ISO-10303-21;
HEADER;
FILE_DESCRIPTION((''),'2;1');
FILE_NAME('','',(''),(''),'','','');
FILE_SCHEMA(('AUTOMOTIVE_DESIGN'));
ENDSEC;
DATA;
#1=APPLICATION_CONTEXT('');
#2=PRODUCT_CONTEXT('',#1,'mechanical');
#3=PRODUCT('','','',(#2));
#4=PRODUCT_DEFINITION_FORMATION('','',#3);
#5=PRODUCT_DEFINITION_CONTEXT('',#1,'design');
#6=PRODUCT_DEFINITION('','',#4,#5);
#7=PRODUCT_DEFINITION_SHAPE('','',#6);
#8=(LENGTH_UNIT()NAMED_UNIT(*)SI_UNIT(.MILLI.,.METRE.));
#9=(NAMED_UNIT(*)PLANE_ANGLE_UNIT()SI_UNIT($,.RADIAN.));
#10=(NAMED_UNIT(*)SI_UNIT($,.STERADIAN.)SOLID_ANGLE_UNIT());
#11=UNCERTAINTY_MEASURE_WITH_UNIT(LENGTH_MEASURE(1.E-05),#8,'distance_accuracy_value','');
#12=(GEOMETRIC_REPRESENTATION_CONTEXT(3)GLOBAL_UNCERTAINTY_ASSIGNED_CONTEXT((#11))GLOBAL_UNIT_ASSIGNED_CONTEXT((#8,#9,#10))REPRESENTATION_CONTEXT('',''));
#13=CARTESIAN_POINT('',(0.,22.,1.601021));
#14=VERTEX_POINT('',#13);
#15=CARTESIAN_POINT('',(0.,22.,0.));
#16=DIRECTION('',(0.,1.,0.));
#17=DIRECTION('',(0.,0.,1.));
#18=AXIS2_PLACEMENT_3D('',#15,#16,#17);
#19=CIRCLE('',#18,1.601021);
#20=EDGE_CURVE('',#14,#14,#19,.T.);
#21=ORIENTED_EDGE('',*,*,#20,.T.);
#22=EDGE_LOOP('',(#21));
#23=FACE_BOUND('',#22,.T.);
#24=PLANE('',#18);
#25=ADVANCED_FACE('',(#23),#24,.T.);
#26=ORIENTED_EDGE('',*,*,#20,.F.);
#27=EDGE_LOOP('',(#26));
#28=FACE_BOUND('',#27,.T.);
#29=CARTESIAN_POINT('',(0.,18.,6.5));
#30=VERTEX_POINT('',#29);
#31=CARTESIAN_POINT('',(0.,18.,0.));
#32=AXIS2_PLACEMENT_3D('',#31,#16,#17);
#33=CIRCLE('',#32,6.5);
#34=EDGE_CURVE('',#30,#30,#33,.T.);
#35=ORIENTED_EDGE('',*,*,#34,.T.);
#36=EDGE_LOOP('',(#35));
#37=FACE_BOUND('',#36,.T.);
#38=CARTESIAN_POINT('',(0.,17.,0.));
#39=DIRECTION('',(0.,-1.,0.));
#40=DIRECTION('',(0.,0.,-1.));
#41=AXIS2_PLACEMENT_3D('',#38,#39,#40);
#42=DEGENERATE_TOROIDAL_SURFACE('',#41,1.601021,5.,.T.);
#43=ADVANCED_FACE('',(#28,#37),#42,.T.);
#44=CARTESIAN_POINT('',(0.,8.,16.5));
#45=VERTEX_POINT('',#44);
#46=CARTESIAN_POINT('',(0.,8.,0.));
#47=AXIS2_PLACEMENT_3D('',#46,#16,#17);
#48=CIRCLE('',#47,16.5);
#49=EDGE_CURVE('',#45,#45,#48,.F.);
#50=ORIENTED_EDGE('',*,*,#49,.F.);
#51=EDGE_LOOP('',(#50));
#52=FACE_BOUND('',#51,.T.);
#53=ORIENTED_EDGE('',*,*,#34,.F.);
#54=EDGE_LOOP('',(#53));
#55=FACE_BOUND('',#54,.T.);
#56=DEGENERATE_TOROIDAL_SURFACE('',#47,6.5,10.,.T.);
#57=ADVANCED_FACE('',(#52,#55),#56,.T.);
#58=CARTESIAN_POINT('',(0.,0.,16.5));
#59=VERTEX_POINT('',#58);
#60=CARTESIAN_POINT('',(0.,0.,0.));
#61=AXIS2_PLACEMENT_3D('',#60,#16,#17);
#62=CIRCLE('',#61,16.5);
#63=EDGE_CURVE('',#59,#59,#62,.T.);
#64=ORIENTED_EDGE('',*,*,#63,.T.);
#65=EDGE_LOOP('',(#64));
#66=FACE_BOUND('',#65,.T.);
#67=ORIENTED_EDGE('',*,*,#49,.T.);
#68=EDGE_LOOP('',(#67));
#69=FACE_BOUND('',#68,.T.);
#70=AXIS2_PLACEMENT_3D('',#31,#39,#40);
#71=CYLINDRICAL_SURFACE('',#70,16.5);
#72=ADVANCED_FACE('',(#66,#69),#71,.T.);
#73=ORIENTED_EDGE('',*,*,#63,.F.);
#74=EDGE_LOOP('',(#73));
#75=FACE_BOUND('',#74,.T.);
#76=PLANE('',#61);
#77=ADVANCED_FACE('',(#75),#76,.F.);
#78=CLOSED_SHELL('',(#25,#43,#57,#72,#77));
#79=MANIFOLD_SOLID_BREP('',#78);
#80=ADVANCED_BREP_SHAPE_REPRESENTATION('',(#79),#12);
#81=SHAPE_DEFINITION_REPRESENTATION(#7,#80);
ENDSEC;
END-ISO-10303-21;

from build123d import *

# Parameters (mm, degrees)
SKETCH1_R           = 16.5
BOSS_EXTRUDE1_DEPTH = 18
FILLET1_R           = 10
SKETCH2_R           = 6.5
BOSS_EXTRUDE2_DEPTH = 4
FILLET5_R           = 5


with BuildPart() as part:
    # Sketch1 → Boss-Extrude1 (new body)
    with BuildSketch(Plane(origin=(0, 0, 0), x_dir=(1, 0, 0), z_dir=(0, 1, 0))):
        with Locations(Location((0, 0, 0), (0, 0, 270))):
            Circle(SKETCH1_R)
    extrude(amount=BOSS_EXTRUDE1_DEPTH)

    # Fillet1
    fillet1_edges = [part.edges().sort_by_distance(p)[0] for p in [
        (0, 18, -16.5),
    ]]
    fillet(fillet1_edges, radius=FILLET1_R)

    # Sketch2 → Boss-Extrude2 (add)
    with BuildSketch(Plane(origin=(0, 18, 0), x_dir=(1, 0, 0), z_dir=(0, 1, 0))):
        with Locations(Location((0, 0, 0), (0, 0, 270))):
            Circle(SKETCH2_R)
    extrude(amount=BOSS_EXTRUDE2_DEPTH)

    # Fillet5
    # the kernel refuses this fillet: 5 mm, written as the material it takes off along each edge
    with BuildSketch(Plane(origin=(0, 22, 0), x_dir=(0, 0, 1), z_dir=(-1, 0, 0))) as fillet5_piece_1:
        with BuildLine():
            CenterArc((1.601020514, -5), FILLET5_R, 11.536959033, 78.463040967)
            Line((1.601020514, 0), (1.601020514, 0.1))
            Line((1.601020514, 0.1), (6.5, 0.1))
            Line((6.5, 0.1), (6.6, 0))
            ThreePointArc((6.6, 0), (6.6, -2), (6.59797959, -3.98))
            Line((6.59797959, -3.98), (6.5, -4))
        make_face()
    revolve(axis=Axis((0, 22, 0), (0, 1, 0)), mode=Mode.SUBTRACT)


solid = part.part
